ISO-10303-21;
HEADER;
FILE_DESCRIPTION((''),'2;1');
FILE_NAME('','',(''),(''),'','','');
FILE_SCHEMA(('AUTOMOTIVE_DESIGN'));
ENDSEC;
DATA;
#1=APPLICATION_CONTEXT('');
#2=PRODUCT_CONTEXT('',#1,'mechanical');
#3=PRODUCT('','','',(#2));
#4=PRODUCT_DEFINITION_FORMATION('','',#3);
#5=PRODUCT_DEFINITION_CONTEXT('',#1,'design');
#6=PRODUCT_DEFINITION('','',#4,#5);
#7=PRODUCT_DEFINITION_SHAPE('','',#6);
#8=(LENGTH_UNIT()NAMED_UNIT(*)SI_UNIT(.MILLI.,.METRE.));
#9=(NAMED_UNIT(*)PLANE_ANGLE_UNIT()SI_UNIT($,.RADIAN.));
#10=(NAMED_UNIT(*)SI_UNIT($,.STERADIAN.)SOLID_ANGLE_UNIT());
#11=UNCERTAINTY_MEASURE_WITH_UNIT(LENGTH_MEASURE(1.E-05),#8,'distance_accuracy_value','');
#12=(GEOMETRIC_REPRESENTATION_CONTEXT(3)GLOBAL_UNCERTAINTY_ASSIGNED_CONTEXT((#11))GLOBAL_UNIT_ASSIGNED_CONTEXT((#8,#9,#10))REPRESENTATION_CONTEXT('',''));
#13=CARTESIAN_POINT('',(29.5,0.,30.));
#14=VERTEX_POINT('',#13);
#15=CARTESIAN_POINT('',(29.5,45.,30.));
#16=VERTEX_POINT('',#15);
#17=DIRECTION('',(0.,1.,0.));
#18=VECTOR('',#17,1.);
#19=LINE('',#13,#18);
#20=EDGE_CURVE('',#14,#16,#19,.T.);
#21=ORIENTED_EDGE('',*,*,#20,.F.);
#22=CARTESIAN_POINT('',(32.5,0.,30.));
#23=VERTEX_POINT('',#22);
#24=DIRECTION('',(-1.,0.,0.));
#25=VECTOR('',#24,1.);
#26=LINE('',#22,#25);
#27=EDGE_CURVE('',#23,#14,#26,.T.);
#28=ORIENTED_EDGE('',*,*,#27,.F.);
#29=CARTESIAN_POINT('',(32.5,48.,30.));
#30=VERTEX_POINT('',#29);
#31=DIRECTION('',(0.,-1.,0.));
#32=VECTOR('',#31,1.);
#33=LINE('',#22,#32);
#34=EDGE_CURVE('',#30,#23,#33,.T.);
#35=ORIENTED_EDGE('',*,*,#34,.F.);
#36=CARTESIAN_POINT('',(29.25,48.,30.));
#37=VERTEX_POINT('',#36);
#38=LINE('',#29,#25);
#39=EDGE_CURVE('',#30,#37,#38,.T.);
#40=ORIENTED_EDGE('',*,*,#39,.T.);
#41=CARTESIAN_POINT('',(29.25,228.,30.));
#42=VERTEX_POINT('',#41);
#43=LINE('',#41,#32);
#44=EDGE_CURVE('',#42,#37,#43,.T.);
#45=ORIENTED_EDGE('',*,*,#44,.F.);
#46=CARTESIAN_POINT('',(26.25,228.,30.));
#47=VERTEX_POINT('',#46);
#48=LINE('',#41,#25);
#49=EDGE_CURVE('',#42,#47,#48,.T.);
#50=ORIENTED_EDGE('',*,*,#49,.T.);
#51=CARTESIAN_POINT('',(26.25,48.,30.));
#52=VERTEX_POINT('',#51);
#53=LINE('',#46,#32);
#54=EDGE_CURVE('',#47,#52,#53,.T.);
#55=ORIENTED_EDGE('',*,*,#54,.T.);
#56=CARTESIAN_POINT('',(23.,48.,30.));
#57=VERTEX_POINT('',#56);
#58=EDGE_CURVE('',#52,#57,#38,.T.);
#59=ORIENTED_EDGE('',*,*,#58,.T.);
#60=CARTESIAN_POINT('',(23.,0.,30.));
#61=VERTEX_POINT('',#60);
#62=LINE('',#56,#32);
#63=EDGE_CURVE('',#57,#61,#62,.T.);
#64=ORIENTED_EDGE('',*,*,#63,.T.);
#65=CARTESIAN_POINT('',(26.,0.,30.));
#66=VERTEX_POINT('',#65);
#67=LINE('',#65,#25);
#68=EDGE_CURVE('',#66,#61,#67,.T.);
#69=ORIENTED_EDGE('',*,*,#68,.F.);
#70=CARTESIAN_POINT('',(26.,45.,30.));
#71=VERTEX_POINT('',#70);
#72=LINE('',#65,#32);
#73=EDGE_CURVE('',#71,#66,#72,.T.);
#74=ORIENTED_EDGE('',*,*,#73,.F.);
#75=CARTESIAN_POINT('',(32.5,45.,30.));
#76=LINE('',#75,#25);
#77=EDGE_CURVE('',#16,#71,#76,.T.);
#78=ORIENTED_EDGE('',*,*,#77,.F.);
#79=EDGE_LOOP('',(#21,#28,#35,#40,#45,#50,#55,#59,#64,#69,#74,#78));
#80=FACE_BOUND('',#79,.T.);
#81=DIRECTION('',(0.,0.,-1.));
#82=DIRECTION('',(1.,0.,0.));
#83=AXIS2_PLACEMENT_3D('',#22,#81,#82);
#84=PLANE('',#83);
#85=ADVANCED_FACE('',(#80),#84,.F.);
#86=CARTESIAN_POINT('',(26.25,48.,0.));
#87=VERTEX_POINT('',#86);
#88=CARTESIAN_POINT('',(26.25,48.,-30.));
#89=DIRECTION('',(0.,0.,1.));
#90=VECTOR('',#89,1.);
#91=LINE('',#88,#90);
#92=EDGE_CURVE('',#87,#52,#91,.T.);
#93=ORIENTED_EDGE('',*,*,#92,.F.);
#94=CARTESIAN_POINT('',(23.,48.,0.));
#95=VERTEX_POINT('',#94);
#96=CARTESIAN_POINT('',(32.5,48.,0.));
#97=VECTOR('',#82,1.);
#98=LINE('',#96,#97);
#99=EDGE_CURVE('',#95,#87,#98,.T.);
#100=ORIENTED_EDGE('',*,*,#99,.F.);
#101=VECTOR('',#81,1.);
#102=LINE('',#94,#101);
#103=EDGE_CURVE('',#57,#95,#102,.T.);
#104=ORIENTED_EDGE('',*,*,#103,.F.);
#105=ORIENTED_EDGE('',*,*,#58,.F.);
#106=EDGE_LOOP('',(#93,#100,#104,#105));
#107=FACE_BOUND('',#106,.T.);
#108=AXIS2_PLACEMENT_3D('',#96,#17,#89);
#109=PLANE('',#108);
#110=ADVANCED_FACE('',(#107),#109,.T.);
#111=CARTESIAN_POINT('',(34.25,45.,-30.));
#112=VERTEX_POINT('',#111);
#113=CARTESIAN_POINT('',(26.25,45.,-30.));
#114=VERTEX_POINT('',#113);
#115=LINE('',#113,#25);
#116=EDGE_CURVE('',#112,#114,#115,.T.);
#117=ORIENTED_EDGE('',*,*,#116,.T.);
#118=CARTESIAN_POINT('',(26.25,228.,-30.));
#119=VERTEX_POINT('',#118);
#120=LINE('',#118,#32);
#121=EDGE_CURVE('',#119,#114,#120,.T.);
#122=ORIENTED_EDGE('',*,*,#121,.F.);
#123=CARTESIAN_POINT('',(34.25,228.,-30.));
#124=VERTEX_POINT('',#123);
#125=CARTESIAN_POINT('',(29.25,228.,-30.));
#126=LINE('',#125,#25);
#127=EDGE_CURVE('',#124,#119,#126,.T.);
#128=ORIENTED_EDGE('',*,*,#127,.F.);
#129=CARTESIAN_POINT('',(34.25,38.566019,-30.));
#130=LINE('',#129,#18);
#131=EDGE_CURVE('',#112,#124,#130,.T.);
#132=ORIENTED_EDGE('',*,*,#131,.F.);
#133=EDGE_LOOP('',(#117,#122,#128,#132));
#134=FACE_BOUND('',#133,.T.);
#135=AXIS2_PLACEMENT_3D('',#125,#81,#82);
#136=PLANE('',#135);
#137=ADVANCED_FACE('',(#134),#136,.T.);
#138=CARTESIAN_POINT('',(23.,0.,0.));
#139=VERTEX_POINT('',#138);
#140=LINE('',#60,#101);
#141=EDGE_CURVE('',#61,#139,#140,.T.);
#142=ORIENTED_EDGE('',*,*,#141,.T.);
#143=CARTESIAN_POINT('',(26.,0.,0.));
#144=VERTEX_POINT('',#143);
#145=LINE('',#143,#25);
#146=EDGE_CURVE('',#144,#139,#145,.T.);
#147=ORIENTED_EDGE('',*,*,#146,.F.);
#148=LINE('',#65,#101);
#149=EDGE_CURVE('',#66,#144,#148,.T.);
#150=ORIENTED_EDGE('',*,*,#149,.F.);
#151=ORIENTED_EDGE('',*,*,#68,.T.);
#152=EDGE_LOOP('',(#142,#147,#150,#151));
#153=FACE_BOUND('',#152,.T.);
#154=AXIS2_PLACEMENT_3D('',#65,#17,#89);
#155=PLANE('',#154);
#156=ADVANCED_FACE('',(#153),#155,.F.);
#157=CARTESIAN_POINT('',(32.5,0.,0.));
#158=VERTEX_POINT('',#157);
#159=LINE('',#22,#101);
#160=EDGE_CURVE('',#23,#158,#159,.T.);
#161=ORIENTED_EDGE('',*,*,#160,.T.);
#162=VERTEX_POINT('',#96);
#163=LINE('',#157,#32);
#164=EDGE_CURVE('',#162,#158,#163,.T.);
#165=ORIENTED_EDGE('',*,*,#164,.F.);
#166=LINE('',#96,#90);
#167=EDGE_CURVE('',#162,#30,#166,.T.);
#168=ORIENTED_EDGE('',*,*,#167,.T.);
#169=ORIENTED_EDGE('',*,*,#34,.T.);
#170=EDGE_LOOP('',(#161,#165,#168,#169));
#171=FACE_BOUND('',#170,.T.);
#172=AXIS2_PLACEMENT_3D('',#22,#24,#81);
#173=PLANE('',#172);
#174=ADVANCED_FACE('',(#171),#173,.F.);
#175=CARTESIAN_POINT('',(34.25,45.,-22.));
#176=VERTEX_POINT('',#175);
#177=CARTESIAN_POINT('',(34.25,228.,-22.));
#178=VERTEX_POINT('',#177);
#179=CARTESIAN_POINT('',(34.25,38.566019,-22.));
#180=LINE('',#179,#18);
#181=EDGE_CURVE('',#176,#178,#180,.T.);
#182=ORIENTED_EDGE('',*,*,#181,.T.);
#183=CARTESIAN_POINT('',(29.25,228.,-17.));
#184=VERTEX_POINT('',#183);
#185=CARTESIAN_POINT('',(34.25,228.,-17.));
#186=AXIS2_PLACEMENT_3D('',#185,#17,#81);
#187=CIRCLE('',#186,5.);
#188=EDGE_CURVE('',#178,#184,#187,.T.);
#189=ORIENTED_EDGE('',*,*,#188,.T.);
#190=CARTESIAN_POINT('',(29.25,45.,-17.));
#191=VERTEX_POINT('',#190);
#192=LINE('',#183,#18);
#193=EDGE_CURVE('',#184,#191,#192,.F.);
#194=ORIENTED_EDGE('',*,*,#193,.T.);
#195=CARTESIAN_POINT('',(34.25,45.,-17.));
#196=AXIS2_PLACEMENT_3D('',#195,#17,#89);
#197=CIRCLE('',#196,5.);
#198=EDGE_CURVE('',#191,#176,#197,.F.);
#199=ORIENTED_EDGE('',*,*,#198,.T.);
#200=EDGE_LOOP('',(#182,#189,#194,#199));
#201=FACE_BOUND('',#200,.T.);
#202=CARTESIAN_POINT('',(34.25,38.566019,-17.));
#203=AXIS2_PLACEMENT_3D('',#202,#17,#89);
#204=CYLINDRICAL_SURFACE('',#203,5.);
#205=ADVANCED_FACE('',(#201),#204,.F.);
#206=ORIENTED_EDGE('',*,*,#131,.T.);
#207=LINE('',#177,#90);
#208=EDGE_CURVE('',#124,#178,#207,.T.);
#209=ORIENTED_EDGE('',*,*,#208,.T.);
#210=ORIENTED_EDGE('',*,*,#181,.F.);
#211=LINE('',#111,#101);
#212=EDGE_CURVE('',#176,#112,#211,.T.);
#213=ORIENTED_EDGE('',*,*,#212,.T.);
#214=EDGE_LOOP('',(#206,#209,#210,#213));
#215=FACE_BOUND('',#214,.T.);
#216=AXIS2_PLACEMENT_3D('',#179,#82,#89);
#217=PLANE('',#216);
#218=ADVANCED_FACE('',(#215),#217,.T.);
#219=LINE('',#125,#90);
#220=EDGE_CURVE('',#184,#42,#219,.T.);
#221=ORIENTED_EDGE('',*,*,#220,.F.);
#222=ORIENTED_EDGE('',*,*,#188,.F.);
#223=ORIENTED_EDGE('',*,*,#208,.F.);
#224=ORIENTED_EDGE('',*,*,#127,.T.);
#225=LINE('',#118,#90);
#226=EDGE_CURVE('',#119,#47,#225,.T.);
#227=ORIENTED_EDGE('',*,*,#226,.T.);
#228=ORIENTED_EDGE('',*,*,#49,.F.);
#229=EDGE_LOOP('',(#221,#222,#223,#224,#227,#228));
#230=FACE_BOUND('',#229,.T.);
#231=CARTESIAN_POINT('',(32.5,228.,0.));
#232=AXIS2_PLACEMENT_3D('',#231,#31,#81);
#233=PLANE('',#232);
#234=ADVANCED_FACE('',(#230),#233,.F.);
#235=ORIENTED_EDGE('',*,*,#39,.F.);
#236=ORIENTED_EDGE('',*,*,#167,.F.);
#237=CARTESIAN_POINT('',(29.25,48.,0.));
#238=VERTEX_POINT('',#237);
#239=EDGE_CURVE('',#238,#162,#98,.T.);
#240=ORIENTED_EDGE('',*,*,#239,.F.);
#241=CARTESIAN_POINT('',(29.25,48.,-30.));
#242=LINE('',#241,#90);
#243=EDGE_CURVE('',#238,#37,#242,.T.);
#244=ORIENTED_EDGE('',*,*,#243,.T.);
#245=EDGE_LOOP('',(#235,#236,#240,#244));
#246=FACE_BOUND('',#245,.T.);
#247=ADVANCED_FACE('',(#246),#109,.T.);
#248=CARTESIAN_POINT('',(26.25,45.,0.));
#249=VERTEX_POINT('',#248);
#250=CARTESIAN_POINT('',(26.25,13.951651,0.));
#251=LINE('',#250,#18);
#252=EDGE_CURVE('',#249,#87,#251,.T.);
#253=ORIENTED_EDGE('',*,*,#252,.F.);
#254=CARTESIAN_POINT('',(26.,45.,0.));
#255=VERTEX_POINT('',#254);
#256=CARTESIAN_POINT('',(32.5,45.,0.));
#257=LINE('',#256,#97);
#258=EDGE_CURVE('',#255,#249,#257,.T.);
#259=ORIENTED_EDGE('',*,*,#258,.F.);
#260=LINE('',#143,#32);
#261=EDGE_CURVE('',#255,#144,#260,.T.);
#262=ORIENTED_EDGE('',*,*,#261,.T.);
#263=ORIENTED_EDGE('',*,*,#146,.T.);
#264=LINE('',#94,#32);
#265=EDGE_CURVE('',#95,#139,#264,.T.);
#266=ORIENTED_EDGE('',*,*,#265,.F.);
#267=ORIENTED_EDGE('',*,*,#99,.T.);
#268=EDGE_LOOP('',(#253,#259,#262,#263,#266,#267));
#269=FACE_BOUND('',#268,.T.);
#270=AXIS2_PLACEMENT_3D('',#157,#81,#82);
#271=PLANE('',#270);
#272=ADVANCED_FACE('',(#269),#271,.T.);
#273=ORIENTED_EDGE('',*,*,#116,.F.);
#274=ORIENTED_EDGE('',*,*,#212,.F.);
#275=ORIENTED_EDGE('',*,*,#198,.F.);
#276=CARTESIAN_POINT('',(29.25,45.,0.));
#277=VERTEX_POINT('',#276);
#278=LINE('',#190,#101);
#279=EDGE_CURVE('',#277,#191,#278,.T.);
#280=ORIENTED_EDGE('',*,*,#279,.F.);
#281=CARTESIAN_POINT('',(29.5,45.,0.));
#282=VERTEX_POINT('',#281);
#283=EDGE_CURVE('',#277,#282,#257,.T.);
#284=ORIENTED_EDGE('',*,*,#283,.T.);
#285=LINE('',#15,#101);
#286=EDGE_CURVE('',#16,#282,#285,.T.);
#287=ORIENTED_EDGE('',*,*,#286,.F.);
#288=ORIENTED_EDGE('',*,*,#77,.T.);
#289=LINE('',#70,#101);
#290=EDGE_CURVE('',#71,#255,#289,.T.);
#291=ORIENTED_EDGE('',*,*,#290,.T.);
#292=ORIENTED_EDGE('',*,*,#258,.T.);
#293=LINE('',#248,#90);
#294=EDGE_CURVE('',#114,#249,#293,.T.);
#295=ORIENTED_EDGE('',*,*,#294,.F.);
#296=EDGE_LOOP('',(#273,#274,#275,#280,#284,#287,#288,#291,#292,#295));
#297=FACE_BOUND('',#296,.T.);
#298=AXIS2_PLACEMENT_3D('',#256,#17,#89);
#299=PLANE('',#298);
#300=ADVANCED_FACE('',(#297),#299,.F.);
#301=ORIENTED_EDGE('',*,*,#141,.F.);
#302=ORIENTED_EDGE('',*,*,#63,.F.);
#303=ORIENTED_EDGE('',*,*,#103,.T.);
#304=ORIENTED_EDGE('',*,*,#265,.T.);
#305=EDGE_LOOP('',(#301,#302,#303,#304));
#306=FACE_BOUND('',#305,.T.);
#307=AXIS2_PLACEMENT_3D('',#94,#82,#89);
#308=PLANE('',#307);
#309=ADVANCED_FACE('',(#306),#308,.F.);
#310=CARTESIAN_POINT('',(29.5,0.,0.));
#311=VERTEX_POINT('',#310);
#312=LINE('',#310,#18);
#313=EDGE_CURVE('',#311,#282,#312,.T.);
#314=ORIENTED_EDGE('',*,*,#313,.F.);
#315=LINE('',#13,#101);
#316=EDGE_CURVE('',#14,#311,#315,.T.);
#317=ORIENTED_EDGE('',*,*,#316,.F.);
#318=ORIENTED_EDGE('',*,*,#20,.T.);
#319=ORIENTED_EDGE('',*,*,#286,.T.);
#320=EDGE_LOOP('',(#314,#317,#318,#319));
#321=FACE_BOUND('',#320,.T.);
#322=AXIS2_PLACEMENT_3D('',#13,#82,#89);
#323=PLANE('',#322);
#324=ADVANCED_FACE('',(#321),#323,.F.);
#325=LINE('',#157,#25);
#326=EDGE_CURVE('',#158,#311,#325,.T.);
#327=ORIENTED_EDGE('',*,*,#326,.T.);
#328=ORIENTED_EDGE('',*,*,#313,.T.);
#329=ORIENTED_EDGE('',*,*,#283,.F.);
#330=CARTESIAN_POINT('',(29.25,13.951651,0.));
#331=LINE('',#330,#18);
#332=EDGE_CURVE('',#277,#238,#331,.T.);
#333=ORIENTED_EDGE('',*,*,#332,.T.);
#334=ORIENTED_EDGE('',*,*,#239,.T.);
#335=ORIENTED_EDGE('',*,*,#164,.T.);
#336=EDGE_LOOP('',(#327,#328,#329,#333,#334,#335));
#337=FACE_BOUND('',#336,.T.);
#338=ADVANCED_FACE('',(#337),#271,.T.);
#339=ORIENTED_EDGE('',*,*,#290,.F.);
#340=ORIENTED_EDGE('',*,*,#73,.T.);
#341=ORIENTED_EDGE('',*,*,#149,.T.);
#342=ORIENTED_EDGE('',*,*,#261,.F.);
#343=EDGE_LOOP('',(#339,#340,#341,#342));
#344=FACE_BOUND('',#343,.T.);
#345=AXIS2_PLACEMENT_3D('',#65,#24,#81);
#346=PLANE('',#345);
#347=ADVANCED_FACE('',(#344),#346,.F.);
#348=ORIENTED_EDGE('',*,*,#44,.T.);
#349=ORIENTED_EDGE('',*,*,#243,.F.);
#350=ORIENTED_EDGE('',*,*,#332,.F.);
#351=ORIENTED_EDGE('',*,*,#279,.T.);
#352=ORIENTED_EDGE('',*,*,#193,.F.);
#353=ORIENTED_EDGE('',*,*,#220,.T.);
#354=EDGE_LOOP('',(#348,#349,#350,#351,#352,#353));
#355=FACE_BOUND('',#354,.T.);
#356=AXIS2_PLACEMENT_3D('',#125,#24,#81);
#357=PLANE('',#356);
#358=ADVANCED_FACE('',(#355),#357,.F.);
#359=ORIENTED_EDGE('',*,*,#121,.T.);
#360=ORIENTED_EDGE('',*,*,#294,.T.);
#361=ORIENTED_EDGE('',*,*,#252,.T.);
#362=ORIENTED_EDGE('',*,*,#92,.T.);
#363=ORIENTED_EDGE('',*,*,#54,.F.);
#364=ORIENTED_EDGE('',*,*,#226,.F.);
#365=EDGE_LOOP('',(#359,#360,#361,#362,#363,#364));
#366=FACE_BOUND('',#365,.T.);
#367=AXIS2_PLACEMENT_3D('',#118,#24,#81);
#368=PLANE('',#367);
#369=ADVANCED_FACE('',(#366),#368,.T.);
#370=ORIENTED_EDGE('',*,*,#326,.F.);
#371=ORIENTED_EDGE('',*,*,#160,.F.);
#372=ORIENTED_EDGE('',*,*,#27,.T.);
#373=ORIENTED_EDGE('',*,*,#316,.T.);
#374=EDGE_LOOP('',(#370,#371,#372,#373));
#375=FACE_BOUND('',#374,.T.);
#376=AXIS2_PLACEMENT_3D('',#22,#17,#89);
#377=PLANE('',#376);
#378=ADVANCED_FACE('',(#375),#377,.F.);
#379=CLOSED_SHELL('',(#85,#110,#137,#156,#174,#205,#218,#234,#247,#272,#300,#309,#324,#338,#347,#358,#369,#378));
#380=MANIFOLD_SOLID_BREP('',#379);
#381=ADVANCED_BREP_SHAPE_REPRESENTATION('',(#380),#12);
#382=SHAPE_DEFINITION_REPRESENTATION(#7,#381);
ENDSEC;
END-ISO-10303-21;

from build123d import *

# Parameters (mm, degrees)
SKETCH_1_W          = 3
SKETCH_1_H          = 45
EXTRUDE_1_DEPTH     = 30
EXTRUDE_1_2_DEPTH   = 30
SKETCH_2_W          = 9.5
SKETCH_2_H          = 30
EXTRUDE_2_DEPTH     = 3
SKETCH_3_W          = 3
SKETCH_3_H          = 60
EXTRUDE_3_DEPTH     = 180
SKETCH_4_W          = 5
SKETCH_4_H          = 8
EXTRUDE_4_DEPTH     = 180
FILLET_4_R          = 5
CUT_EXTRUDE_START   = -18
SKETCH_5_W          = 60.08866788
SKETCH_5_H          = 228
CUT_EXTRUDE_1_DEPTH = 11.25
EXTRUDE_5_DEPTH     = 3


with BuildPart() as part:
    # 草图1 → 凸台-拉伸1 (new body)
    with BuildSketch(Plane.XY):
        with Locations((1.5, 22.5)):
            Rectangle(SKETCH_1_W, SKETCH_1_H)
    extrude(amount=EXTRUDE_1_DEPTH)



with BuildPart() as body_2:
    # 草图1 → Extrude 1 2 (new body)
    with BuildSketch(Plane.XY):
        with Locations((8, 22.5)):
            Rectangle(SKETCH_1_W, SKETCH_1_H)
    extrude(amount=EXTRUDE_1_2_DEPTH)


with BuildPart() as part_1:
    add(part.part)

    add(body_2.part)  # 凸台-拉伸2 merges body 2
    # 草图2 → 凸台-拉伸2 (add)
    with BuildSketch(Plane(origin=(0, 45, 0), x_dir=(1, 0, 0), z_dir=(0, 1, 0))):
        with Locations((4.75, -15)):
            Rectangle(SKETCH_2_W, SKETCH_2_H)
    extrude(amount=EXTRUDE_2_DEPTH)

    # 草图3 → 凸台-拉伸3 (add)
    with BuildSketch(Plane(origin=(0, 48, 0), x_dir=(1, 0, 0), z_dir=(0, 1, 0))):
        with Locations((4.75, 0)):
            Rectangle(SKETCH_3_W, SKETCH_3_H)
    extrude(amount=EXTRUDE_3_DEPTH)

    # 草图4 → 凸台-拉伸4 (add)
    with BuildSketch(Plane(origin=(0, 228, 0), x_dir=(1, 0, 0), z_dir=(0, 1, 0))):
        with Locations((0.75, 26)):
            Rectangle(SKETCH_4_W, SKETCH_4_H)
    extrude(amount=-EXTRUDE_4_DEPTH)

    # 圆角4
    fillet_4_edges = [part_1.edges().sort_by_distance(p)[0] for p in [
        (3.25, 138, -22),
    ]]
    fillet(fillet_4_edges, radius=FILLET_4_R - 0.0001)  # a hair under: the kernel refuses the full size


with BuildPart() as body_2_2:
    # 镜向3: mirrored copy
    add(part_1.part.mirror(Plane(origin=(16.25, 0, 0), x_dir=(0, 0, 1), z_dir=(1, 0, 0))))

    # 草图6 → 凸台-拉伸5 (add)
    with BuildSketch(Plane.XZ.offset(-48)):
        with BuildLine():
            Line((26.25, 0), (26.25, -30))
            Line((26.25, -30), (34.25, -30))
            Line((34.25, -30), (34.25, -22))
            ThreePointArc((34.25, -22), (30.714466094, -20.535533906), (29.25, -17))
            Line((29.25, -17), (29.25, 0))
            Line((29.25, 0), (26.25, 0))
        make_face()
    extrude(amount=EXTRUDE_5_DEPTH)


with BuildPart() as part_2:
    add(part_1.part)

    # 草图5 → 切除-拉伸1 (cut)
    with BuildSketch(Plane(origin=(16.25, 0, 0), x_dir=(0, 0, -1), z_dir=(1, 0, 0)).offset(CUT_EXTRUDE_START)):
        with Locations((0.04433394, 114)):
            Rectangle(SKETCH_5_W, SKETCH_5_H)
    extrude(amount=CUT_EXTRUDE_1_DEPTH, mode=Mode.SUBTRACT)


solid = body_2_2.part
